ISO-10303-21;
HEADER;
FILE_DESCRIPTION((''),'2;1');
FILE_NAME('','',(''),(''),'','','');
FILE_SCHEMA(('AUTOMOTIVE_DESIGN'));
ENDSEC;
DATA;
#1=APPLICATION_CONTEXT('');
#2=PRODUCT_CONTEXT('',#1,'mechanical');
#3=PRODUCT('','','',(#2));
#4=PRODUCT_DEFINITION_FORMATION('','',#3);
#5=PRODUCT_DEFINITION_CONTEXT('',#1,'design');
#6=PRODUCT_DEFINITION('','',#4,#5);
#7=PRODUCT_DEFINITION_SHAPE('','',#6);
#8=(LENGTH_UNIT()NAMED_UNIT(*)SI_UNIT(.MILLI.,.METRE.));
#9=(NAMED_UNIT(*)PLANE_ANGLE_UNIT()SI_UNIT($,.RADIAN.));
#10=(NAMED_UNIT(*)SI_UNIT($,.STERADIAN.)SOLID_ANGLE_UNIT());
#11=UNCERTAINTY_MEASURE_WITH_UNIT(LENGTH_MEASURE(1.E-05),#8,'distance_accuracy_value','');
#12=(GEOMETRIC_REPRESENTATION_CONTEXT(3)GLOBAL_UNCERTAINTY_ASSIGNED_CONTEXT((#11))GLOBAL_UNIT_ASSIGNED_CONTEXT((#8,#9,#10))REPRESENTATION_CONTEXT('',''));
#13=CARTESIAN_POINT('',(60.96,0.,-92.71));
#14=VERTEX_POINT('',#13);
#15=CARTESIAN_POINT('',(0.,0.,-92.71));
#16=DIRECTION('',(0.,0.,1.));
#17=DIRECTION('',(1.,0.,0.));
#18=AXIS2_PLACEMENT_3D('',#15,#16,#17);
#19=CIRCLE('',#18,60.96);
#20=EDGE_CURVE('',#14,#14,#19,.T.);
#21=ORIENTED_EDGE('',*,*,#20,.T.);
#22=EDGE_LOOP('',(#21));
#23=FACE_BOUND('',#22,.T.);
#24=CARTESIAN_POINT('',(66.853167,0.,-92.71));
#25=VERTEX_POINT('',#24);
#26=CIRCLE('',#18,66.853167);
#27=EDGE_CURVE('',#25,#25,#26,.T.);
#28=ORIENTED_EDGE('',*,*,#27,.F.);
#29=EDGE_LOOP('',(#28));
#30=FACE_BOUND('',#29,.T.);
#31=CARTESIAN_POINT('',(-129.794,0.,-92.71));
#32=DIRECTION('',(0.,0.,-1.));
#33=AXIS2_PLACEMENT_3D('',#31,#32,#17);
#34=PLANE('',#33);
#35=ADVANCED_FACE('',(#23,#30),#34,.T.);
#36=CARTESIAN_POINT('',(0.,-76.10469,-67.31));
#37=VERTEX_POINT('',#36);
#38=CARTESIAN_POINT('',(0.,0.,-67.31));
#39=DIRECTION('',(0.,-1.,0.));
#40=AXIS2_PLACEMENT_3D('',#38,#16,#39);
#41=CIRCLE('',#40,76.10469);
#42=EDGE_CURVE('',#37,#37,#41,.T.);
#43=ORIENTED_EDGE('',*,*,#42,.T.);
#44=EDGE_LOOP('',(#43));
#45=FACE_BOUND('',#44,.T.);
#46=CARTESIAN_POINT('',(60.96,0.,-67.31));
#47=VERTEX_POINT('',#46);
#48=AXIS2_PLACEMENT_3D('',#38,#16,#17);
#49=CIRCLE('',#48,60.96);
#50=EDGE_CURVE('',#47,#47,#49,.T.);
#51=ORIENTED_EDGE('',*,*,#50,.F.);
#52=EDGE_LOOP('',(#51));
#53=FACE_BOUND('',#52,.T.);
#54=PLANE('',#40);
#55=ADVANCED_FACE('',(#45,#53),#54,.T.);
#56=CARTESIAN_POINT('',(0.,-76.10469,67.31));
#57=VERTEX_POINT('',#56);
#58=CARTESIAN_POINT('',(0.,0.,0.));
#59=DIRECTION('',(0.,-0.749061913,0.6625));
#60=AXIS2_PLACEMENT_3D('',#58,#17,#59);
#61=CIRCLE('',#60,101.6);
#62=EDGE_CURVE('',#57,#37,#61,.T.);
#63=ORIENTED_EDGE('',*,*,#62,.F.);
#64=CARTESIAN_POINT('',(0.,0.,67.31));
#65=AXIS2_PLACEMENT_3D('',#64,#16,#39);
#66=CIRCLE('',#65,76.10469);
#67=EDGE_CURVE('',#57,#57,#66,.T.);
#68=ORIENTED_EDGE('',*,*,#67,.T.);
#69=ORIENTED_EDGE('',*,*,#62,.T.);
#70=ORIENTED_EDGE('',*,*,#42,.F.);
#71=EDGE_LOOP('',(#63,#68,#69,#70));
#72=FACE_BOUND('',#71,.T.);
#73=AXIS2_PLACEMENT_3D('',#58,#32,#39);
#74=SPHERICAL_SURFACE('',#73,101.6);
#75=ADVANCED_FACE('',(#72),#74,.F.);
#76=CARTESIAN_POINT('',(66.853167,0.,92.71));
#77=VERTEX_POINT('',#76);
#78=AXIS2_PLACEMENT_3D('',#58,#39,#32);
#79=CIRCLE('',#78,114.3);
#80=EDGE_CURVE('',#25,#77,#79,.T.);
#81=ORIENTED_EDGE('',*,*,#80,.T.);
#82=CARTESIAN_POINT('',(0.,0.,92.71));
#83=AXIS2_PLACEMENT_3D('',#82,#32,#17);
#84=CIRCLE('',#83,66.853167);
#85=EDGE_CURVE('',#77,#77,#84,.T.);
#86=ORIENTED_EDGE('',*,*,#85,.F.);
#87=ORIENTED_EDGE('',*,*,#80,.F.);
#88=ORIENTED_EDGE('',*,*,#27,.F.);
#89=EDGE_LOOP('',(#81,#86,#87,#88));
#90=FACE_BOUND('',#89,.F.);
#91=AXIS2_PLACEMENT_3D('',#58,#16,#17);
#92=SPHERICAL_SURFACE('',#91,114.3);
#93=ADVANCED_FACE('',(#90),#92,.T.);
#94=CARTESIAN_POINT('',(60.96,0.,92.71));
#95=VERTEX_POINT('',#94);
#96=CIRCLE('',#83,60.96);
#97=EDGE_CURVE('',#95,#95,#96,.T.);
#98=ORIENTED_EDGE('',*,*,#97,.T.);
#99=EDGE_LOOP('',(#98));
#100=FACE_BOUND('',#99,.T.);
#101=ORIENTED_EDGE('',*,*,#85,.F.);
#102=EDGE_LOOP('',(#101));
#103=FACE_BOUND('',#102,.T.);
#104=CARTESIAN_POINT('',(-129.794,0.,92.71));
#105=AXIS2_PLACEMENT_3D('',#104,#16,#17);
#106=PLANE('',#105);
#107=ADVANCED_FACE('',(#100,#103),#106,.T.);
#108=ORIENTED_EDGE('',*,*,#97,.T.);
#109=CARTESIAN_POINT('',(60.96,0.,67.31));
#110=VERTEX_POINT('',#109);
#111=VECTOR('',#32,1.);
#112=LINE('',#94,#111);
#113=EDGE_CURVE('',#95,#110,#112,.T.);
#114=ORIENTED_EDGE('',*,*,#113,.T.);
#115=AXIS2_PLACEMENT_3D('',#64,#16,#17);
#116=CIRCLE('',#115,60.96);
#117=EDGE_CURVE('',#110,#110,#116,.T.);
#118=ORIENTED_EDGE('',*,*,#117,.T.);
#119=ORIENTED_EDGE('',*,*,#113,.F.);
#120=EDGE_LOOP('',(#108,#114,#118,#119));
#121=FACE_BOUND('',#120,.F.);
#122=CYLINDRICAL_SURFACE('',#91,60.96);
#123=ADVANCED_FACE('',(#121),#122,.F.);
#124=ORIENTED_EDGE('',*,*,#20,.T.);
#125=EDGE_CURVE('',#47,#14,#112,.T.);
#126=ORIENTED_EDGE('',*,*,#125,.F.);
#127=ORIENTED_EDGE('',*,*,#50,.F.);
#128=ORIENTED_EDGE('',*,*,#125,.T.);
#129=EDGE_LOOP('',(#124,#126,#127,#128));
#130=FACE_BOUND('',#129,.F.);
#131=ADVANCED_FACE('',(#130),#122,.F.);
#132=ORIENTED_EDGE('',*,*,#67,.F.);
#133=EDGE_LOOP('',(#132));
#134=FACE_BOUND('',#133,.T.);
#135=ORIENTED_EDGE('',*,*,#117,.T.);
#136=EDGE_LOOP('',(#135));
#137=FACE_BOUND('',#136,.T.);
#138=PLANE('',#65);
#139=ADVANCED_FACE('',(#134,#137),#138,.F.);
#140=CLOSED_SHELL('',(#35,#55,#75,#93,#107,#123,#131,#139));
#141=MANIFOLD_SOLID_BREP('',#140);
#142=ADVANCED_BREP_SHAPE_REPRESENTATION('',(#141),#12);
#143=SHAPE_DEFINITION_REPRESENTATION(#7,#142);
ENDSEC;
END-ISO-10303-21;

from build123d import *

# Parameters (mm, degrees)
F2_R          = 60.96
F3_DEPTH      = 114.301
F3_DEPTH_BACK = 114.301
F4_W          = 259.588
F4_H          = 37.084
F5_DEPTH      = 114.301
F5_DEPTH_BACK = 114.301


with BuildPart() as f1:
    # F0 (on Front) → F1 (revolve)
    with BuildSketch(Plane.XZ):
        with BuildLine():
            Line((0, 114.3), (0, -114.3))
            ThreePointArc((0, -114.3), (114.3, 0), (0, 114.3))
        make_face()
    revolve(axis=Axis((0, 0, 0), (0, 0, -1)))

    # F2 (on Top) → F3 (cut, two sides)
    with BuildSketch(Plane.XY) as f3_sk:
        Circle(F2_R)
    extrude(amount=-F3_DEPTH, mode=Mode.SUBTRACT)
    extrude(f3_sk.sketch, amount=F3_DEPTH_BACK, mode=Mode.SUBTRACT)

    # F4 (on Front) → F5 (cut, two sides)
    with BuildSketch(Plane.XZ) as f5_sk:
        with Locations((0, 111.252)):
            Rectangle(F4_W, F4_H)
        with Locations((0, -111.252)):
            Rectangle(F4_W, F4_H)
    extrude(amount=-F5_DEPTH, mode=Mode.SUBTRACT)
    extrude(f5_sk.sketch, amount=F5_DEPTH_BACK, mode=Mode.SUBTRACT)

    # F6 (on Right) → F7 (revolve, cut)
    with BuildSketch(Plane.YZ):
        with BuildLine():
            Line((0, 67.31), (-76.1046903942, 67.31))
            ThreePointArc((-76.1046903942, 67.31), (-101.6, 0), (-76.1046903942, -67.31))
            Line((-76.1046903942, -67.31), (0, -67.31))
            Line((0, -67.31), (0, 67.31))
        make_face()
    revolve(axis=Axis((0, 0, 0), (0, 0, 1)), mode=Mode.SUBTRACT)


solid = f1.part
